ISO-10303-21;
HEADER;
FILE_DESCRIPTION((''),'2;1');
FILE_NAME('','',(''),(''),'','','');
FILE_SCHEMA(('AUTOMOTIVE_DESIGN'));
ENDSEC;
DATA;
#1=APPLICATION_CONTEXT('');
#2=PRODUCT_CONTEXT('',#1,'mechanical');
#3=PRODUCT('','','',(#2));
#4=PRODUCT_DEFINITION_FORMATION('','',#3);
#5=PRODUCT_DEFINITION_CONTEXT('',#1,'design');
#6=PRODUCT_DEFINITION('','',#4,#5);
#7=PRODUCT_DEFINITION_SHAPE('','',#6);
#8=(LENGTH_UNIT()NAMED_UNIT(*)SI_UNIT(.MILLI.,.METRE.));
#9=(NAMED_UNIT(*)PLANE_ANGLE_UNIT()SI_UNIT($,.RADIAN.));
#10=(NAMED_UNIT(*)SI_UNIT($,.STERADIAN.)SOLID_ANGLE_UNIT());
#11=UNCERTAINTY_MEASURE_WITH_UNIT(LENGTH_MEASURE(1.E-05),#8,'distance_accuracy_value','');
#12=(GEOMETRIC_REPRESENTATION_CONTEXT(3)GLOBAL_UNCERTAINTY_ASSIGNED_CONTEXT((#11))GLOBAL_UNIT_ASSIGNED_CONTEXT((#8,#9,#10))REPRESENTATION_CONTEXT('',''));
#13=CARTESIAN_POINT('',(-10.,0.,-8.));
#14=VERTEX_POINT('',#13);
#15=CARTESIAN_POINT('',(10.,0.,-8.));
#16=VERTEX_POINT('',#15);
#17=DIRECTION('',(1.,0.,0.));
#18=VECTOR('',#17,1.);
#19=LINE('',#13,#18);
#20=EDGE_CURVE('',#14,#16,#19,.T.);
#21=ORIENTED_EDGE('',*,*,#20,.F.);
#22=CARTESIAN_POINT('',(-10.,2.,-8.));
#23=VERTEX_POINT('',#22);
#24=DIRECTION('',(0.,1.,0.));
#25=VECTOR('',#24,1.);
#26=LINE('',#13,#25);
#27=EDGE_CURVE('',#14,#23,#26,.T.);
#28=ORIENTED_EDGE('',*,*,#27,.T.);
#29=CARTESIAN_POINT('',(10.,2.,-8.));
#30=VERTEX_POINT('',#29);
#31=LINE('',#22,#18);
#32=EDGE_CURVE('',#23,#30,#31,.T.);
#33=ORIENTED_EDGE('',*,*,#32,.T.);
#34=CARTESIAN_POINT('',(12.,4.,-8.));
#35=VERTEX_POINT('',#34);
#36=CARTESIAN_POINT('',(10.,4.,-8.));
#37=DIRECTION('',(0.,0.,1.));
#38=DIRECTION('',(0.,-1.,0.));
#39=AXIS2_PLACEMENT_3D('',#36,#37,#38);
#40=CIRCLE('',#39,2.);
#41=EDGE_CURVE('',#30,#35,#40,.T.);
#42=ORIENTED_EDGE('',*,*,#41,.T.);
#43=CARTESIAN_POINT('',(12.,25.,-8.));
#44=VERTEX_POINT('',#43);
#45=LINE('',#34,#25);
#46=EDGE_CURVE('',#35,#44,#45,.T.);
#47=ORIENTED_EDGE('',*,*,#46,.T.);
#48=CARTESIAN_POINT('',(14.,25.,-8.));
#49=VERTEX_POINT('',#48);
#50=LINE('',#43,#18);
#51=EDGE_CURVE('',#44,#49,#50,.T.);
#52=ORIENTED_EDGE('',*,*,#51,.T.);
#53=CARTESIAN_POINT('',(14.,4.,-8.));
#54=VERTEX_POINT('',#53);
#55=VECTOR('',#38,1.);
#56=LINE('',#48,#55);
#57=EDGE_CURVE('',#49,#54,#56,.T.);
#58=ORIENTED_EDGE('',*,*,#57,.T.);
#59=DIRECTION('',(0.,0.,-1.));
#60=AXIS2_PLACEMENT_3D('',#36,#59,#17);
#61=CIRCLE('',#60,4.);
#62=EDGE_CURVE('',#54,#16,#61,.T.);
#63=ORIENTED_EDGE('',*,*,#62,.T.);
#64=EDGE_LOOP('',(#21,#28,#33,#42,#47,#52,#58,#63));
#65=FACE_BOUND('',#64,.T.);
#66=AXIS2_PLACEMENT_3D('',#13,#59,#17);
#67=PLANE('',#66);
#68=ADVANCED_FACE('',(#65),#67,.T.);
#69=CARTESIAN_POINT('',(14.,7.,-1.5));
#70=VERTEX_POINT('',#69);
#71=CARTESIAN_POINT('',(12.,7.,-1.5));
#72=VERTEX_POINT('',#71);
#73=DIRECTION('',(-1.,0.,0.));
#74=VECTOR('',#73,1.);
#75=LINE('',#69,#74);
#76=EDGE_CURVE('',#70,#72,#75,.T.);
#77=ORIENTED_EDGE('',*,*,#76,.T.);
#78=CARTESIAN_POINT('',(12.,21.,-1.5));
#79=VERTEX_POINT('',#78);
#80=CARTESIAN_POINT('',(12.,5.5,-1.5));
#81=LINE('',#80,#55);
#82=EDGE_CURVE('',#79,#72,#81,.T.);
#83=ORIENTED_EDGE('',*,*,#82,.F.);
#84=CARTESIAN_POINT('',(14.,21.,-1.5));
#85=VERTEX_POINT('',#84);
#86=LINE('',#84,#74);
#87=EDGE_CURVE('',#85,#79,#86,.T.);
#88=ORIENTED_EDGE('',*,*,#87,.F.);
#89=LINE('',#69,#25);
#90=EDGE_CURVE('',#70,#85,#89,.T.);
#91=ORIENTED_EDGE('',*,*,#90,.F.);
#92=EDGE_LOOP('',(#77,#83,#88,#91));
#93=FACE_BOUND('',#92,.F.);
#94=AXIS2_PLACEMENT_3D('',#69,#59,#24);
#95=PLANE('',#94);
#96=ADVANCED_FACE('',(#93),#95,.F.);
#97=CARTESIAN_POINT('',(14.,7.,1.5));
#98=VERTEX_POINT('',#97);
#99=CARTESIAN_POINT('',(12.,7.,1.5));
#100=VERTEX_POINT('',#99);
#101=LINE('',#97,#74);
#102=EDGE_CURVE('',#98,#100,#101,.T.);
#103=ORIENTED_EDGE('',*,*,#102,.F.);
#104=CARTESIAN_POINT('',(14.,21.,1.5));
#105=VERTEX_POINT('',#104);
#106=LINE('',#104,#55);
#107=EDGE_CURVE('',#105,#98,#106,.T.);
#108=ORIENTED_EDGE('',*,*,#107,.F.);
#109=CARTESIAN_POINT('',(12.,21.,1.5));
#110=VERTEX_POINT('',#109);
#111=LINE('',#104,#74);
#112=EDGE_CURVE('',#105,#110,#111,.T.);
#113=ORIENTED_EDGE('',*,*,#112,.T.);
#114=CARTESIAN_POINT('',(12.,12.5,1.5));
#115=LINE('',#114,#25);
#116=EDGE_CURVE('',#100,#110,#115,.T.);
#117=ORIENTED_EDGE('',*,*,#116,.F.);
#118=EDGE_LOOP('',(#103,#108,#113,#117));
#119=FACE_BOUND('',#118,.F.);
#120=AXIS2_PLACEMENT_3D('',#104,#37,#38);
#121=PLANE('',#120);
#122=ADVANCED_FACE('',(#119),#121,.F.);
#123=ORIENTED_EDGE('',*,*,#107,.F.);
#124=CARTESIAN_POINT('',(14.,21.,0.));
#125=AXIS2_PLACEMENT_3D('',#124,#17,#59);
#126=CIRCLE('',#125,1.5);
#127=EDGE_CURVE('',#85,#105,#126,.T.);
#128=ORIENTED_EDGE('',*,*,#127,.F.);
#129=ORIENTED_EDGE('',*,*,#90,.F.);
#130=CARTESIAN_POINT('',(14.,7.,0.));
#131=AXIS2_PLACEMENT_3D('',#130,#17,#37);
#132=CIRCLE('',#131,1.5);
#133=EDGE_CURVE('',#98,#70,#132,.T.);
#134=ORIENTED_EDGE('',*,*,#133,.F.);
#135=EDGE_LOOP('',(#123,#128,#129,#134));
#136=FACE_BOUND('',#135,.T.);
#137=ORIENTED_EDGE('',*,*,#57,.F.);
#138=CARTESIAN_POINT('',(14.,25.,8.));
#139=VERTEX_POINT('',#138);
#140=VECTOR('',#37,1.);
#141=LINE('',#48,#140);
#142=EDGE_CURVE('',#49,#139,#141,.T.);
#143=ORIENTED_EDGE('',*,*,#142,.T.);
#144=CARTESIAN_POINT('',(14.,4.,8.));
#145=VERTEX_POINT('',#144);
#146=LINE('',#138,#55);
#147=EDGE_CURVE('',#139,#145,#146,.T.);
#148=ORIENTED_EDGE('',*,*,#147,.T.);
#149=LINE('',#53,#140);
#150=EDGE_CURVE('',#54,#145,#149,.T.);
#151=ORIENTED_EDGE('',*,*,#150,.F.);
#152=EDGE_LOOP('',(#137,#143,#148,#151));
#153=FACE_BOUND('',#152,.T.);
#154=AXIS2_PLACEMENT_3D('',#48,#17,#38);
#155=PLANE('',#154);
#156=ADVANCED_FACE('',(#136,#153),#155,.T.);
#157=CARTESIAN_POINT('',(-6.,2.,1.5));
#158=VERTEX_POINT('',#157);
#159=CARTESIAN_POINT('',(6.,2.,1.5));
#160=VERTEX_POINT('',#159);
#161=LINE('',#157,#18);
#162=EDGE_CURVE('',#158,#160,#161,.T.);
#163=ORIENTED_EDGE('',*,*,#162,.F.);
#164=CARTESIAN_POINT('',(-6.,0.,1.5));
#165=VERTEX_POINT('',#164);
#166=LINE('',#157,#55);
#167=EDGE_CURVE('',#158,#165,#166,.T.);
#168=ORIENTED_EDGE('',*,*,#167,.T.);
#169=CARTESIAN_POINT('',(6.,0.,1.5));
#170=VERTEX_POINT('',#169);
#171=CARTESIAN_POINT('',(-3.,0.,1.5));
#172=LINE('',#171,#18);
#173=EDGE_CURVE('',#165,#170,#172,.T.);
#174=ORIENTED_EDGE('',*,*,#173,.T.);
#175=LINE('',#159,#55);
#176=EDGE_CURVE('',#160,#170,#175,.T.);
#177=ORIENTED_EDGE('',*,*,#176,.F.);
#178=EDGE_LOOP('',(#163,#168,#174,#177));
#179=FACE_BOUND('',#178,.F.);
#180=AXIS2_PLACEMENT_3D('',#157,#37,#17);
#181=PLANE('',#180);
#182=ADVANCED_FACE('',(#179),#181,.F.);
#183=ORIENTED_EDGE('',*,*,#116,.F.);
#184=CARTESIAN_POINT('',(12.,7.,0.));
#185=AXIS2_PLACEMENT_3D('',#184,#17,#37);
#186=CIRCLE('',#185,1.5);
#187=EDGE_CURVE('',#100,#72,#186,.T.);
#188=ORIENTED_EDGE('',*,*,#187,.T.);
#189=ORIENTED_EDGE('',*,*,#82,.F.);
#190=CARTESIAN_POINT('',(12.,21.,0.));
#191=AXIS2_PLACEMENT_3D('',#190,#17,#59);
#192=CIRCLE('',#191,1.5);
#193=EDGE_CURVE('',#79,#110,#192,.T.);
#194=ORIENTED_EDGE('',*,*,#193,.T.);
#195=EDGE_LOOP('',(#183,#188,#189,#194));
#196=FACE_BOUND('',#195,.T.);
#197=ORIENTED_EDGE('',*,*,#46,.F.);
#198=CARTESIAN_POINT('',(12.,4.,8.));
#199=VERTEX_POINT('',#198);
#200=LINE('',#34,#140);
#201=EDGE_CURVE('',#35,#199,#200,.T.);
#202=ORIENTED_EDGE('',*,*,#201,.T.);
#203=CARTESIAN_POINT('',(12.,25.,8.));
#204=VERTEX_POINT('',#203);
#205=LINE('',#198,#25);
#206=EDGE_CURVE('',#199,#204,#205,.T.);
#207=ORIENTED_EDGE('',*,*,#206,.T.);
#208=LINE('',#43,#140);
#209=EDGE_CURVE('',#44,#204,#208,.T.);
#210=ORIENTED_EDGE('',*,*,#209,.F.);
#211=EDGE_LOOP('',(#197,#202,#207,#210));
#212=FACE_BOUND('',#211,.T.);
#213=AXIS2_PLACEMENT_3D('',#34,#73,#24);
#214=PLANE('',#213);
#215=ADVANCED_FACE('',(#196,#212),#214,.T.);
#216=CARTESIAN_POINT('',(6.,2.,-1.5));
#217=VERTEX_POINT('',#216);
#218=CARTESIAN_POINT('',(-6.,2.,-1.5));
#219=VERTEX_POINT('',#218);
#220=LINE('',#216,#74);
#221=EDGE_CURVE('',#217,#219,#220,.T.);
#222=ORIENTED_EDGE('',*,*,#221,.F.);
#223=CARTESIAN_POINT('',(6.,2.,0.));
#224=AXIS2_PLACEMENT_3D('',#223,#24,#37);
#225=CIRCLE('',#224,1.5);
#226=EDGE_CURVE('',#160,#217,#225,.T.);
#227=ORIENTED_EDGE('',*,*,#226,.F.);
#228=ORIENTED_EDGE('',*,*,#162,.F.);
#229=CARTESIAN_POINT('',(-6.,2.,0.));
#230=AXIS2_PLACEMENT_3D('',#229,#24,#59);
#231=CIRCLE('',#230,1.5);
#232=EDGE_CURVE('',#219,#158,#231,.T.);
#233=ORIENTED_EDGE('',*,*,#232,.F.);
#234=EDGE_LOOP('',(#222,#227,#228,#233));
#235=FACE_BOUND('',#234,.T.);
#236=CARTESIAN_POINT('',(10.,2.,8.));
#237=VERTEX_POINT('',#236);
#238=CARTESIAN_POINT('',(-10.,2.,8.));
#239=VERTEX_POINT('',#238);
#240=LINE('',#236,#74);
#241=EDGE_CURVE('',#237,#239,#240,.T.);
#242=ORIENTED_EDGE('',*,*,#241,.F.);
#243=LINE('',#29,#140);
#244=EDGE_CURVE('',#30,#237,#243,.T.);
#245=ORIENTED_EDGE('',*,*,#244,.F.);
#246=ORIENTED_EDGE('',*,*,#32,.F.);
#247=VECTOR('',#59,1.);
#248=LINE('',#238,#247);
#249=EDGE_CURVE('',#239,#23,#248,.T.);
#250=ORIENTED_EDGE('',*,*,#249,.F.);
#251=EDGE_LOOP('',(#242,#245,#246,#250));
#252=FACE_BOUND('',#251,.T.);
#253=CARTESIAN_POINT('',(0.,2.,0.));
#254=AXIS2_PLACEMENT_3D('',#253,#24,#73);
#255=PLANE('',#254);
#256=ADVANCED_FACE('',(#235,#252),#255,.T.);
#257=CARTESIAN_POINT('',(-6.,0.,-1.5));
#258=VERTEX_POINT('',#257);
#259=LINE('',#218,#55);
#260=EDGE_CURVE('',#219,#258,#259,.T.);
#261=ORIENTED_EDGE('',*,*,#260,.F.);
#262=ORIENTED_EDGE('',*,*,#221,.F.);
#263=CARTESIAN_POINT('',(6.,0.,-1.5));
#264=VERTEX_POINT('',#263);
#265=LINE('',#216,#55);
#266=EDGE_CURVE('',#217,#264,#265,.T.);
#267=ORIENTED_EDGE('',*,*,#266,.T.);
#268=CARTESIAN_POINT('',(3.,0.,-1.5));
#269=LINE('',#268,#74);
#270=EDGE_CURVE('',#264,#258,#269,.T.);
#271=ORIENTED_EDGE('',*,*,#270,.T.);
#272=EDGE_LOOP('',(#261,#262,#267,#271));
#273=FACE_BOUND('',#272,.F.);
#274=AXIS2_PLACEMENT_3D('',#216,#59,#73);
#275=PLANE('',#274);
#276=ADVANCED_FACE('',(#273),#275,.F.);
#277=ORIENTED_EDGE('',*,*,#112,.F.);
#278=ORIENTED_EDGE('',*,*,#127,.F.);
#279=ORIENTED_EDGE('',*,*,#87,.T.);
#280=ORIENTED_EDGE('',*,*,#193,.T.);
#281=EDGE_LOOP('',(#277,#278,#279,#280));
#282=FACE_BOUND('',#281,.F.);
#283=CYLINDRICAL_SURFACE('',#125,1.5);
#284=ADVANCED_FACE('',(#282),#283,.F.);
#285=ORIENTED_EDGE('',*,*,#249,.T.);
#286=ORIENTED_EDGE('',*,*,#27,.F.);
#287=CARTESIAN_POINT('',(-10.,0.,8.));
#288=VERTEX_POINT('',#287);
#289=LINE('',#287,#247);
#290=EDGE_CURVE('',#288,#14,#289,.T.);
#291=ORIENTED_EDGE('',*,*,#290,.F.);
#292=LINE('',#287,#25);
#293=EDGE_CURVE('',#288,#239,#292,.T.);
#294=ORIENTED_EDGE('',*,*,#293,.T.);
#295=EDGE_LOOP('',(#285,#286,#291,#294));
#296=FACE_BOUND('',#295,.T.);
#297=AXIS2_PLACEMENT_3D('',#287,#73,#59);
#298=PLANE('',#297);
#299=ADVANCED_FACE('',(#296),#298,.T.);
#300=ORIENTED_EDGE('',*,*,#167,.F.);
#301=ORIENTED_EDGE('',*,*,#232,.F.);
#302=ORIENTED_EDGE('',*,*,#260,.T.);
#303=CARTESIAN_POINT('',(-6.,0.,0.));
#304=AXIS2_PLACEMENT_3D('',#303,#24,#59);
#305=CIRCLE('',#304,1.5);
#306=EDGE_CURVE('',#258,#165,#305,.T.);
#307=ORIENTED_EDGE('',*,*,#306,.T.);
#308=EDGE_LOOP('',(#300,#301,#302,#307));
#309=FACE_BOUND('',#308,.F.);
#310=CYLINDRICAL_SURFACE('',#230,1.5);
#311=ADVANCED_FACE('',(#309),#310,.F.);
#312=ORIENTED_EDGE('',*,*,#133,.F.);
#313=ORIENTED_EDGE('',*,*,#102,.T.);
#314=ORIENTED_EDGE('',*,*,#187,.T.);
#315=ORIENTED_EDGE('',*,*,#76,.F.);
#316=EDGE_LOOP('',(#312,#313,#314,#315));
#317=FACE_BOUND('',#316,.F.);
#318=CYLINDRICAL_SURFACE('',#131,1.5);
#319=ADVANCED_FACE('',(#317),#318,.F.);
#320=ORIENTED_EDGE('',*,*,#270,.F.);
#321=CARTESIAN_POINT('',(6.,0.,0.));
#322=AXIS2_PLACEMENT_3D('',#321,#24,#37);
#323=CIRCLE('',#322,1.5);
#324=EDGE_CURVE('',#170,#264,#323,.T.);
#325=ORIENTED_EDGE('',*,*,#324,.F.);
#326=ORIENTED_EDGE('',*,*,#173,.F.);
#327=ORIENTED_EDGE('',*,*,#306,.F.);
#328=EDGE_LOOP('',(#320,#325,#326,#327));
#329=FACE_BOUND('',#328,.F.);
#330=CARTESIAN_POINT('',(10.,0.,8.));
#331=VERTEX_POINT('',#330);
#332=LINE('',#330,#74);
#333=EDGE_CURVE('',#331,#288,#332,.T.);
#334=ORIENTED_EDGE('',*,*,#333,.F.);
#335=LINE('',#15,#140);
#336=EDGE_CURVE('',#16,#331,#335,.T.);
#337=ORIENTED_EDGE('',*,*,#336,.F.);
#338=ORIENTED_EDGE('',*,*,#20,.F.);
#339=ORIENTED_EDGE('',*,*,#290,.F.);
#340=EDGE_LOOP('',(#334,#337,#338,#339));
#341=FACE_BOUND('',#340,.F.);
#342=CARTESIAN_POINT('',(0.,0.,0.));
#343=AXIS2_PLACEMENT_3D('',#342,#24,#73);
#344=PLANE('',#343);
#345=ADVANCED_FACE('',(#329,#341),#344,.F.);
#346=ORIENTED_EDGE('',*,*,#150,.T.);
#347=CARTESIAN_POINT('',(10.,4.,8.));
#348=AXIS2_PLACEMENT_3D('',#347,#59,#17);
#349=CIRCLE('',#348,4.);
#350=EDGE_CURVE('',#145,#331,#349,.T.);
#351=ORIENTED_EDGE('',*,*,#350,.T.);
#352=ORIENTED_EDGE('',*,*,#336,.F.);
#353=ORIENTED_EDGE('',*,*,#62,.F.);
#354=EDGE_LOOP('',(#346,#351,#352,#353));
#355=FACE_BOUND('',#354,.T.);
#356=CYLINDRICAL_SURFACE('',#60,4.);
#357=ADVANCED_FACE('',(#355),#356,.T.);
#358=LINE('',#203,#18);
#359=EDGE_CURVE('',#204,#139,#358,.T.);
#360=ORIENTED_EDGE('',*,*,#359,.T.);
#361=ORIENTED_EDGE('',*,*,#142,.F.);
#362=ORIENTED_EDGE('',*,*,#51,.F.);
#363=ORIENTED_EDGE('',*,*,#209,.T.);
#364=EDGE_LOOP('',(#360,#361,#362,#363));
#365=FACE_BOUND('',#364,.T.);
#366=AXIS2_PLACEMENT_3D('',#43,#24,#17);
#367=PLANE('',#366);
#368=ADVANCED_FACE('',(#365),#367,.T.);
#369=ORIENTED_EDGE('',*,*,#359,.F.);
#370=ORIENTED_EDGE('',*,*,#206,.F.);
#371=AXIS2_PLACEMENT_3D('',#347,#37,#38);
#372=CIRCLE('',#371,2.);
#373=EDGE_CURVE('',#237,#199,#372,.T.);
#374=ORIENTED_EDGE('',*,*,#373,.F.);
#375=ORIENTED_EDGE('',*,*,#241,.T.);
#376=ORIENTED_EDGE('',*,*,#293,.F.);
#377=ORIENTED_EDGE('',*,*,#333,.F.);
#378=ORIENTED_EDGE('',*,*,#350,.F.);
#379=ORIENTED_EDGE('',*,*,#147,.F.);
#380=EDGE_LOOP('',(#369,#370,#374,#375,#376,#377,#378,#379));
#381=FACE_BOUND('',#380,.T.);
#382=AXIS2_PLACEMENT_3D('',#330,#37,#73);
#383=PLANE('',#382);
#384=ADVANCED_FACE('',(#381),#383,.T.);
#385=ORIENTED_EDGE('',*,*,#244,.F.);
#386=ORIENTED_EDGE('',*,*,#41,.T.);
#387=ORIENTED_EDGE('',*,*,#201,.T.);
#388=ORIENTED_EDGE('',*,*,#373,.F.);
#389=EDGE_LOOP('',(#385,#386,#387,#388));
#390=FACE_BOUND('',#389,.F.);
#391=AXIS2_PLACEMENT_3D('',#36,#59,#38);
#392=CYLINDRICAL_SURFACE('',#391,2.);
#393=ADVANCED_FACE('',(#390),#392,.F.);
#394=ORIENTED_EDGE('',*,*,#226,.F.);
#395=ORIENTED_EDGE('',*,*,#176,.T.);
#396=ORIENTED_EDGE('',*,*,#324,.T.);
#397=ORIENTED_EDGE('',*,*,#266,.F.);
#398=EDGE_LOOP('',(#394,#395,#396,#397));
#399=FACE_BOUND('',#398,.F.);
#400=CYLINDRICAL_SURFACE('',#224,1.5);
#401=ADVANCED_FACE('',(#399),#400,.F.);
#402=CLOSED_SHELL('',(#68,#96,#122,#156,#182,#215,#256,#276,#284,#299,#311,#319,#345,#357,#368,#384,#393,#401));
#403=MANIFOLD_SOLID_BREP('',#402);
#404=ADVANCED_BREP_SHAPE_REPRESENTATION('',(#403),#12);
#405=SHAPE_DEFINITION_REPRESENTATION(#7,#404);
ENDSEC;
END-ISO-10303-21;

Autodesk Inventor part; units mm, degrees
ref_plane "YZ Plane" through (0, 0, 0) normal (1, 0, 0) x (0, 1, 0)
ref_plane "XZ Plane" through (0, 0, 0) normal (0, 1, 0) x (-1, 0, 0)
ref_plane "XY Plane" through (0, 0, 0) normal (0, 0, 1) x (1, 0, 0)
sketch "スケッチ1" plane through (0, 0, 0) normal (0, 1, 0) x (-1, 0, 0)
  line L0 (-10, 8) -> (10, 8)
  line L1 (10, 8) -> (10, -8)
  line L2 (10, -8) -> (-10, -8)
  line L3 (-10, -8) -> (-10, 8)
  line L4 (-10, 8) -> (10, -8) construction
  line L5 (10, 8) -> (-10, -8) construction
  point P0 (0, 0)
  dimension "d0" = 20
  dimension "d1" = 16
extrude "プレート1" add sketch "スケッチ1" along normal blind 2
sketch "スケッチ2" plane through (12, 4, -8) normal (1, 0, 0) x (0, 1, 0)
  line L0 (0, 16) -> (0, 0)
  line L1 (0, 0) -> (21, 0)
  line L2 (21, 0) -> (21, 16)
  line L3 (21, 16) -> (0, 16)
edge flange "フランジ1" height 25 angle 90 thickness 2 bend radius 2 thickness toward (1, 0, 0) relief tear relief width 2 relief depth 1 edges at (10, 2, 0) wall of the first edge with corners at (12, 4, 8) (12, 4, -8) (12, 25, -8) (12, 25, 8)
bend "曲げ1"
corner "コーナー1"
sketch "スケッチ3" plane through (14, 25, 8) normal (1, 0, 0) x (0, 0, -1)
  line L0 (6.5, -4) -> (6.5, -18)
  arc A0 (6.5, -18) -> (9.5, -18) centre (8, -18) ccw
  line L1 (9.5, -18) -> (9.5, -4)
  arc A1 (9.5, -4) -> (6.5, -4) centre (8, -4) ccw
  line L2 (16, 0) -> (16, -21) projected
  line L3 (0, 0) -> (16, 0) projected
  point P0 (8, -25)
  point P1 (8, 0)
  dimension "d19" = 1.5
extrude "押し出し1" cut sketch "スケッチ3" against normal blind 10
sketch "スケッチ4" plane through (0, 2, 0) normal (0, 1, 0) x (1, 0, 0)
  line L0 (-6, -1.5) -> (6, -1.5)
  arc A0 (6, -1.5) -> (6, 1.5) centre (6, 0) ccw
  line L1 (6, 1.5) -> (-6, 1.5)
  arc A1 (-6, 1.5) -> (-6, -1.5) centre (-6, 0) ccw
  line L2 (-10, -8) -> (-10, 8) projected
  line L3 (10, 8) -> (10, -8) projected
  point P0 (0, 0)
  dimension "d23" = 4
  dimension "d24" = 4
  dimension "d25" = 1.5
extrude "押し出し2" cut sketch "スケッチ4" against normal blind 10
equation "\"d2\" = Thickness"
equation "\"d3\" = BendReliefWidth"
equation "\"d4\" = BendReliefDepth"
equation "\"d5\" = MinimumRemnant"
equation "\"d6\" = TransitionRadius"
equation "\"d9\" = BendRadius"
equation "\"d10\" = CornerReliefSize"
equation "\"d11\" = GapSize"
equation "\"d12\" = JacobiRadiusSize"
equation "\"BendRadius\" = Thickness"
equation "\"BendReliefWidth\" = Thickness"
equation "\"BendReliefDepth\" = 0.5 * Thickness"
equation "\"CornerReliefSize\" = 4 * Thickness"
equation "\"MinimumRemnant\" = 2 * Thickness"
equation "\"TransitionRadius\" = BendRadius"
equation "\"JacobiRadiusSize\" = BendRadius"
equation "\"GapSize\" = Thickness"
equation "\"Thickness\" = 2"
properties part number "keyL" material "アルミニウム 6061"
